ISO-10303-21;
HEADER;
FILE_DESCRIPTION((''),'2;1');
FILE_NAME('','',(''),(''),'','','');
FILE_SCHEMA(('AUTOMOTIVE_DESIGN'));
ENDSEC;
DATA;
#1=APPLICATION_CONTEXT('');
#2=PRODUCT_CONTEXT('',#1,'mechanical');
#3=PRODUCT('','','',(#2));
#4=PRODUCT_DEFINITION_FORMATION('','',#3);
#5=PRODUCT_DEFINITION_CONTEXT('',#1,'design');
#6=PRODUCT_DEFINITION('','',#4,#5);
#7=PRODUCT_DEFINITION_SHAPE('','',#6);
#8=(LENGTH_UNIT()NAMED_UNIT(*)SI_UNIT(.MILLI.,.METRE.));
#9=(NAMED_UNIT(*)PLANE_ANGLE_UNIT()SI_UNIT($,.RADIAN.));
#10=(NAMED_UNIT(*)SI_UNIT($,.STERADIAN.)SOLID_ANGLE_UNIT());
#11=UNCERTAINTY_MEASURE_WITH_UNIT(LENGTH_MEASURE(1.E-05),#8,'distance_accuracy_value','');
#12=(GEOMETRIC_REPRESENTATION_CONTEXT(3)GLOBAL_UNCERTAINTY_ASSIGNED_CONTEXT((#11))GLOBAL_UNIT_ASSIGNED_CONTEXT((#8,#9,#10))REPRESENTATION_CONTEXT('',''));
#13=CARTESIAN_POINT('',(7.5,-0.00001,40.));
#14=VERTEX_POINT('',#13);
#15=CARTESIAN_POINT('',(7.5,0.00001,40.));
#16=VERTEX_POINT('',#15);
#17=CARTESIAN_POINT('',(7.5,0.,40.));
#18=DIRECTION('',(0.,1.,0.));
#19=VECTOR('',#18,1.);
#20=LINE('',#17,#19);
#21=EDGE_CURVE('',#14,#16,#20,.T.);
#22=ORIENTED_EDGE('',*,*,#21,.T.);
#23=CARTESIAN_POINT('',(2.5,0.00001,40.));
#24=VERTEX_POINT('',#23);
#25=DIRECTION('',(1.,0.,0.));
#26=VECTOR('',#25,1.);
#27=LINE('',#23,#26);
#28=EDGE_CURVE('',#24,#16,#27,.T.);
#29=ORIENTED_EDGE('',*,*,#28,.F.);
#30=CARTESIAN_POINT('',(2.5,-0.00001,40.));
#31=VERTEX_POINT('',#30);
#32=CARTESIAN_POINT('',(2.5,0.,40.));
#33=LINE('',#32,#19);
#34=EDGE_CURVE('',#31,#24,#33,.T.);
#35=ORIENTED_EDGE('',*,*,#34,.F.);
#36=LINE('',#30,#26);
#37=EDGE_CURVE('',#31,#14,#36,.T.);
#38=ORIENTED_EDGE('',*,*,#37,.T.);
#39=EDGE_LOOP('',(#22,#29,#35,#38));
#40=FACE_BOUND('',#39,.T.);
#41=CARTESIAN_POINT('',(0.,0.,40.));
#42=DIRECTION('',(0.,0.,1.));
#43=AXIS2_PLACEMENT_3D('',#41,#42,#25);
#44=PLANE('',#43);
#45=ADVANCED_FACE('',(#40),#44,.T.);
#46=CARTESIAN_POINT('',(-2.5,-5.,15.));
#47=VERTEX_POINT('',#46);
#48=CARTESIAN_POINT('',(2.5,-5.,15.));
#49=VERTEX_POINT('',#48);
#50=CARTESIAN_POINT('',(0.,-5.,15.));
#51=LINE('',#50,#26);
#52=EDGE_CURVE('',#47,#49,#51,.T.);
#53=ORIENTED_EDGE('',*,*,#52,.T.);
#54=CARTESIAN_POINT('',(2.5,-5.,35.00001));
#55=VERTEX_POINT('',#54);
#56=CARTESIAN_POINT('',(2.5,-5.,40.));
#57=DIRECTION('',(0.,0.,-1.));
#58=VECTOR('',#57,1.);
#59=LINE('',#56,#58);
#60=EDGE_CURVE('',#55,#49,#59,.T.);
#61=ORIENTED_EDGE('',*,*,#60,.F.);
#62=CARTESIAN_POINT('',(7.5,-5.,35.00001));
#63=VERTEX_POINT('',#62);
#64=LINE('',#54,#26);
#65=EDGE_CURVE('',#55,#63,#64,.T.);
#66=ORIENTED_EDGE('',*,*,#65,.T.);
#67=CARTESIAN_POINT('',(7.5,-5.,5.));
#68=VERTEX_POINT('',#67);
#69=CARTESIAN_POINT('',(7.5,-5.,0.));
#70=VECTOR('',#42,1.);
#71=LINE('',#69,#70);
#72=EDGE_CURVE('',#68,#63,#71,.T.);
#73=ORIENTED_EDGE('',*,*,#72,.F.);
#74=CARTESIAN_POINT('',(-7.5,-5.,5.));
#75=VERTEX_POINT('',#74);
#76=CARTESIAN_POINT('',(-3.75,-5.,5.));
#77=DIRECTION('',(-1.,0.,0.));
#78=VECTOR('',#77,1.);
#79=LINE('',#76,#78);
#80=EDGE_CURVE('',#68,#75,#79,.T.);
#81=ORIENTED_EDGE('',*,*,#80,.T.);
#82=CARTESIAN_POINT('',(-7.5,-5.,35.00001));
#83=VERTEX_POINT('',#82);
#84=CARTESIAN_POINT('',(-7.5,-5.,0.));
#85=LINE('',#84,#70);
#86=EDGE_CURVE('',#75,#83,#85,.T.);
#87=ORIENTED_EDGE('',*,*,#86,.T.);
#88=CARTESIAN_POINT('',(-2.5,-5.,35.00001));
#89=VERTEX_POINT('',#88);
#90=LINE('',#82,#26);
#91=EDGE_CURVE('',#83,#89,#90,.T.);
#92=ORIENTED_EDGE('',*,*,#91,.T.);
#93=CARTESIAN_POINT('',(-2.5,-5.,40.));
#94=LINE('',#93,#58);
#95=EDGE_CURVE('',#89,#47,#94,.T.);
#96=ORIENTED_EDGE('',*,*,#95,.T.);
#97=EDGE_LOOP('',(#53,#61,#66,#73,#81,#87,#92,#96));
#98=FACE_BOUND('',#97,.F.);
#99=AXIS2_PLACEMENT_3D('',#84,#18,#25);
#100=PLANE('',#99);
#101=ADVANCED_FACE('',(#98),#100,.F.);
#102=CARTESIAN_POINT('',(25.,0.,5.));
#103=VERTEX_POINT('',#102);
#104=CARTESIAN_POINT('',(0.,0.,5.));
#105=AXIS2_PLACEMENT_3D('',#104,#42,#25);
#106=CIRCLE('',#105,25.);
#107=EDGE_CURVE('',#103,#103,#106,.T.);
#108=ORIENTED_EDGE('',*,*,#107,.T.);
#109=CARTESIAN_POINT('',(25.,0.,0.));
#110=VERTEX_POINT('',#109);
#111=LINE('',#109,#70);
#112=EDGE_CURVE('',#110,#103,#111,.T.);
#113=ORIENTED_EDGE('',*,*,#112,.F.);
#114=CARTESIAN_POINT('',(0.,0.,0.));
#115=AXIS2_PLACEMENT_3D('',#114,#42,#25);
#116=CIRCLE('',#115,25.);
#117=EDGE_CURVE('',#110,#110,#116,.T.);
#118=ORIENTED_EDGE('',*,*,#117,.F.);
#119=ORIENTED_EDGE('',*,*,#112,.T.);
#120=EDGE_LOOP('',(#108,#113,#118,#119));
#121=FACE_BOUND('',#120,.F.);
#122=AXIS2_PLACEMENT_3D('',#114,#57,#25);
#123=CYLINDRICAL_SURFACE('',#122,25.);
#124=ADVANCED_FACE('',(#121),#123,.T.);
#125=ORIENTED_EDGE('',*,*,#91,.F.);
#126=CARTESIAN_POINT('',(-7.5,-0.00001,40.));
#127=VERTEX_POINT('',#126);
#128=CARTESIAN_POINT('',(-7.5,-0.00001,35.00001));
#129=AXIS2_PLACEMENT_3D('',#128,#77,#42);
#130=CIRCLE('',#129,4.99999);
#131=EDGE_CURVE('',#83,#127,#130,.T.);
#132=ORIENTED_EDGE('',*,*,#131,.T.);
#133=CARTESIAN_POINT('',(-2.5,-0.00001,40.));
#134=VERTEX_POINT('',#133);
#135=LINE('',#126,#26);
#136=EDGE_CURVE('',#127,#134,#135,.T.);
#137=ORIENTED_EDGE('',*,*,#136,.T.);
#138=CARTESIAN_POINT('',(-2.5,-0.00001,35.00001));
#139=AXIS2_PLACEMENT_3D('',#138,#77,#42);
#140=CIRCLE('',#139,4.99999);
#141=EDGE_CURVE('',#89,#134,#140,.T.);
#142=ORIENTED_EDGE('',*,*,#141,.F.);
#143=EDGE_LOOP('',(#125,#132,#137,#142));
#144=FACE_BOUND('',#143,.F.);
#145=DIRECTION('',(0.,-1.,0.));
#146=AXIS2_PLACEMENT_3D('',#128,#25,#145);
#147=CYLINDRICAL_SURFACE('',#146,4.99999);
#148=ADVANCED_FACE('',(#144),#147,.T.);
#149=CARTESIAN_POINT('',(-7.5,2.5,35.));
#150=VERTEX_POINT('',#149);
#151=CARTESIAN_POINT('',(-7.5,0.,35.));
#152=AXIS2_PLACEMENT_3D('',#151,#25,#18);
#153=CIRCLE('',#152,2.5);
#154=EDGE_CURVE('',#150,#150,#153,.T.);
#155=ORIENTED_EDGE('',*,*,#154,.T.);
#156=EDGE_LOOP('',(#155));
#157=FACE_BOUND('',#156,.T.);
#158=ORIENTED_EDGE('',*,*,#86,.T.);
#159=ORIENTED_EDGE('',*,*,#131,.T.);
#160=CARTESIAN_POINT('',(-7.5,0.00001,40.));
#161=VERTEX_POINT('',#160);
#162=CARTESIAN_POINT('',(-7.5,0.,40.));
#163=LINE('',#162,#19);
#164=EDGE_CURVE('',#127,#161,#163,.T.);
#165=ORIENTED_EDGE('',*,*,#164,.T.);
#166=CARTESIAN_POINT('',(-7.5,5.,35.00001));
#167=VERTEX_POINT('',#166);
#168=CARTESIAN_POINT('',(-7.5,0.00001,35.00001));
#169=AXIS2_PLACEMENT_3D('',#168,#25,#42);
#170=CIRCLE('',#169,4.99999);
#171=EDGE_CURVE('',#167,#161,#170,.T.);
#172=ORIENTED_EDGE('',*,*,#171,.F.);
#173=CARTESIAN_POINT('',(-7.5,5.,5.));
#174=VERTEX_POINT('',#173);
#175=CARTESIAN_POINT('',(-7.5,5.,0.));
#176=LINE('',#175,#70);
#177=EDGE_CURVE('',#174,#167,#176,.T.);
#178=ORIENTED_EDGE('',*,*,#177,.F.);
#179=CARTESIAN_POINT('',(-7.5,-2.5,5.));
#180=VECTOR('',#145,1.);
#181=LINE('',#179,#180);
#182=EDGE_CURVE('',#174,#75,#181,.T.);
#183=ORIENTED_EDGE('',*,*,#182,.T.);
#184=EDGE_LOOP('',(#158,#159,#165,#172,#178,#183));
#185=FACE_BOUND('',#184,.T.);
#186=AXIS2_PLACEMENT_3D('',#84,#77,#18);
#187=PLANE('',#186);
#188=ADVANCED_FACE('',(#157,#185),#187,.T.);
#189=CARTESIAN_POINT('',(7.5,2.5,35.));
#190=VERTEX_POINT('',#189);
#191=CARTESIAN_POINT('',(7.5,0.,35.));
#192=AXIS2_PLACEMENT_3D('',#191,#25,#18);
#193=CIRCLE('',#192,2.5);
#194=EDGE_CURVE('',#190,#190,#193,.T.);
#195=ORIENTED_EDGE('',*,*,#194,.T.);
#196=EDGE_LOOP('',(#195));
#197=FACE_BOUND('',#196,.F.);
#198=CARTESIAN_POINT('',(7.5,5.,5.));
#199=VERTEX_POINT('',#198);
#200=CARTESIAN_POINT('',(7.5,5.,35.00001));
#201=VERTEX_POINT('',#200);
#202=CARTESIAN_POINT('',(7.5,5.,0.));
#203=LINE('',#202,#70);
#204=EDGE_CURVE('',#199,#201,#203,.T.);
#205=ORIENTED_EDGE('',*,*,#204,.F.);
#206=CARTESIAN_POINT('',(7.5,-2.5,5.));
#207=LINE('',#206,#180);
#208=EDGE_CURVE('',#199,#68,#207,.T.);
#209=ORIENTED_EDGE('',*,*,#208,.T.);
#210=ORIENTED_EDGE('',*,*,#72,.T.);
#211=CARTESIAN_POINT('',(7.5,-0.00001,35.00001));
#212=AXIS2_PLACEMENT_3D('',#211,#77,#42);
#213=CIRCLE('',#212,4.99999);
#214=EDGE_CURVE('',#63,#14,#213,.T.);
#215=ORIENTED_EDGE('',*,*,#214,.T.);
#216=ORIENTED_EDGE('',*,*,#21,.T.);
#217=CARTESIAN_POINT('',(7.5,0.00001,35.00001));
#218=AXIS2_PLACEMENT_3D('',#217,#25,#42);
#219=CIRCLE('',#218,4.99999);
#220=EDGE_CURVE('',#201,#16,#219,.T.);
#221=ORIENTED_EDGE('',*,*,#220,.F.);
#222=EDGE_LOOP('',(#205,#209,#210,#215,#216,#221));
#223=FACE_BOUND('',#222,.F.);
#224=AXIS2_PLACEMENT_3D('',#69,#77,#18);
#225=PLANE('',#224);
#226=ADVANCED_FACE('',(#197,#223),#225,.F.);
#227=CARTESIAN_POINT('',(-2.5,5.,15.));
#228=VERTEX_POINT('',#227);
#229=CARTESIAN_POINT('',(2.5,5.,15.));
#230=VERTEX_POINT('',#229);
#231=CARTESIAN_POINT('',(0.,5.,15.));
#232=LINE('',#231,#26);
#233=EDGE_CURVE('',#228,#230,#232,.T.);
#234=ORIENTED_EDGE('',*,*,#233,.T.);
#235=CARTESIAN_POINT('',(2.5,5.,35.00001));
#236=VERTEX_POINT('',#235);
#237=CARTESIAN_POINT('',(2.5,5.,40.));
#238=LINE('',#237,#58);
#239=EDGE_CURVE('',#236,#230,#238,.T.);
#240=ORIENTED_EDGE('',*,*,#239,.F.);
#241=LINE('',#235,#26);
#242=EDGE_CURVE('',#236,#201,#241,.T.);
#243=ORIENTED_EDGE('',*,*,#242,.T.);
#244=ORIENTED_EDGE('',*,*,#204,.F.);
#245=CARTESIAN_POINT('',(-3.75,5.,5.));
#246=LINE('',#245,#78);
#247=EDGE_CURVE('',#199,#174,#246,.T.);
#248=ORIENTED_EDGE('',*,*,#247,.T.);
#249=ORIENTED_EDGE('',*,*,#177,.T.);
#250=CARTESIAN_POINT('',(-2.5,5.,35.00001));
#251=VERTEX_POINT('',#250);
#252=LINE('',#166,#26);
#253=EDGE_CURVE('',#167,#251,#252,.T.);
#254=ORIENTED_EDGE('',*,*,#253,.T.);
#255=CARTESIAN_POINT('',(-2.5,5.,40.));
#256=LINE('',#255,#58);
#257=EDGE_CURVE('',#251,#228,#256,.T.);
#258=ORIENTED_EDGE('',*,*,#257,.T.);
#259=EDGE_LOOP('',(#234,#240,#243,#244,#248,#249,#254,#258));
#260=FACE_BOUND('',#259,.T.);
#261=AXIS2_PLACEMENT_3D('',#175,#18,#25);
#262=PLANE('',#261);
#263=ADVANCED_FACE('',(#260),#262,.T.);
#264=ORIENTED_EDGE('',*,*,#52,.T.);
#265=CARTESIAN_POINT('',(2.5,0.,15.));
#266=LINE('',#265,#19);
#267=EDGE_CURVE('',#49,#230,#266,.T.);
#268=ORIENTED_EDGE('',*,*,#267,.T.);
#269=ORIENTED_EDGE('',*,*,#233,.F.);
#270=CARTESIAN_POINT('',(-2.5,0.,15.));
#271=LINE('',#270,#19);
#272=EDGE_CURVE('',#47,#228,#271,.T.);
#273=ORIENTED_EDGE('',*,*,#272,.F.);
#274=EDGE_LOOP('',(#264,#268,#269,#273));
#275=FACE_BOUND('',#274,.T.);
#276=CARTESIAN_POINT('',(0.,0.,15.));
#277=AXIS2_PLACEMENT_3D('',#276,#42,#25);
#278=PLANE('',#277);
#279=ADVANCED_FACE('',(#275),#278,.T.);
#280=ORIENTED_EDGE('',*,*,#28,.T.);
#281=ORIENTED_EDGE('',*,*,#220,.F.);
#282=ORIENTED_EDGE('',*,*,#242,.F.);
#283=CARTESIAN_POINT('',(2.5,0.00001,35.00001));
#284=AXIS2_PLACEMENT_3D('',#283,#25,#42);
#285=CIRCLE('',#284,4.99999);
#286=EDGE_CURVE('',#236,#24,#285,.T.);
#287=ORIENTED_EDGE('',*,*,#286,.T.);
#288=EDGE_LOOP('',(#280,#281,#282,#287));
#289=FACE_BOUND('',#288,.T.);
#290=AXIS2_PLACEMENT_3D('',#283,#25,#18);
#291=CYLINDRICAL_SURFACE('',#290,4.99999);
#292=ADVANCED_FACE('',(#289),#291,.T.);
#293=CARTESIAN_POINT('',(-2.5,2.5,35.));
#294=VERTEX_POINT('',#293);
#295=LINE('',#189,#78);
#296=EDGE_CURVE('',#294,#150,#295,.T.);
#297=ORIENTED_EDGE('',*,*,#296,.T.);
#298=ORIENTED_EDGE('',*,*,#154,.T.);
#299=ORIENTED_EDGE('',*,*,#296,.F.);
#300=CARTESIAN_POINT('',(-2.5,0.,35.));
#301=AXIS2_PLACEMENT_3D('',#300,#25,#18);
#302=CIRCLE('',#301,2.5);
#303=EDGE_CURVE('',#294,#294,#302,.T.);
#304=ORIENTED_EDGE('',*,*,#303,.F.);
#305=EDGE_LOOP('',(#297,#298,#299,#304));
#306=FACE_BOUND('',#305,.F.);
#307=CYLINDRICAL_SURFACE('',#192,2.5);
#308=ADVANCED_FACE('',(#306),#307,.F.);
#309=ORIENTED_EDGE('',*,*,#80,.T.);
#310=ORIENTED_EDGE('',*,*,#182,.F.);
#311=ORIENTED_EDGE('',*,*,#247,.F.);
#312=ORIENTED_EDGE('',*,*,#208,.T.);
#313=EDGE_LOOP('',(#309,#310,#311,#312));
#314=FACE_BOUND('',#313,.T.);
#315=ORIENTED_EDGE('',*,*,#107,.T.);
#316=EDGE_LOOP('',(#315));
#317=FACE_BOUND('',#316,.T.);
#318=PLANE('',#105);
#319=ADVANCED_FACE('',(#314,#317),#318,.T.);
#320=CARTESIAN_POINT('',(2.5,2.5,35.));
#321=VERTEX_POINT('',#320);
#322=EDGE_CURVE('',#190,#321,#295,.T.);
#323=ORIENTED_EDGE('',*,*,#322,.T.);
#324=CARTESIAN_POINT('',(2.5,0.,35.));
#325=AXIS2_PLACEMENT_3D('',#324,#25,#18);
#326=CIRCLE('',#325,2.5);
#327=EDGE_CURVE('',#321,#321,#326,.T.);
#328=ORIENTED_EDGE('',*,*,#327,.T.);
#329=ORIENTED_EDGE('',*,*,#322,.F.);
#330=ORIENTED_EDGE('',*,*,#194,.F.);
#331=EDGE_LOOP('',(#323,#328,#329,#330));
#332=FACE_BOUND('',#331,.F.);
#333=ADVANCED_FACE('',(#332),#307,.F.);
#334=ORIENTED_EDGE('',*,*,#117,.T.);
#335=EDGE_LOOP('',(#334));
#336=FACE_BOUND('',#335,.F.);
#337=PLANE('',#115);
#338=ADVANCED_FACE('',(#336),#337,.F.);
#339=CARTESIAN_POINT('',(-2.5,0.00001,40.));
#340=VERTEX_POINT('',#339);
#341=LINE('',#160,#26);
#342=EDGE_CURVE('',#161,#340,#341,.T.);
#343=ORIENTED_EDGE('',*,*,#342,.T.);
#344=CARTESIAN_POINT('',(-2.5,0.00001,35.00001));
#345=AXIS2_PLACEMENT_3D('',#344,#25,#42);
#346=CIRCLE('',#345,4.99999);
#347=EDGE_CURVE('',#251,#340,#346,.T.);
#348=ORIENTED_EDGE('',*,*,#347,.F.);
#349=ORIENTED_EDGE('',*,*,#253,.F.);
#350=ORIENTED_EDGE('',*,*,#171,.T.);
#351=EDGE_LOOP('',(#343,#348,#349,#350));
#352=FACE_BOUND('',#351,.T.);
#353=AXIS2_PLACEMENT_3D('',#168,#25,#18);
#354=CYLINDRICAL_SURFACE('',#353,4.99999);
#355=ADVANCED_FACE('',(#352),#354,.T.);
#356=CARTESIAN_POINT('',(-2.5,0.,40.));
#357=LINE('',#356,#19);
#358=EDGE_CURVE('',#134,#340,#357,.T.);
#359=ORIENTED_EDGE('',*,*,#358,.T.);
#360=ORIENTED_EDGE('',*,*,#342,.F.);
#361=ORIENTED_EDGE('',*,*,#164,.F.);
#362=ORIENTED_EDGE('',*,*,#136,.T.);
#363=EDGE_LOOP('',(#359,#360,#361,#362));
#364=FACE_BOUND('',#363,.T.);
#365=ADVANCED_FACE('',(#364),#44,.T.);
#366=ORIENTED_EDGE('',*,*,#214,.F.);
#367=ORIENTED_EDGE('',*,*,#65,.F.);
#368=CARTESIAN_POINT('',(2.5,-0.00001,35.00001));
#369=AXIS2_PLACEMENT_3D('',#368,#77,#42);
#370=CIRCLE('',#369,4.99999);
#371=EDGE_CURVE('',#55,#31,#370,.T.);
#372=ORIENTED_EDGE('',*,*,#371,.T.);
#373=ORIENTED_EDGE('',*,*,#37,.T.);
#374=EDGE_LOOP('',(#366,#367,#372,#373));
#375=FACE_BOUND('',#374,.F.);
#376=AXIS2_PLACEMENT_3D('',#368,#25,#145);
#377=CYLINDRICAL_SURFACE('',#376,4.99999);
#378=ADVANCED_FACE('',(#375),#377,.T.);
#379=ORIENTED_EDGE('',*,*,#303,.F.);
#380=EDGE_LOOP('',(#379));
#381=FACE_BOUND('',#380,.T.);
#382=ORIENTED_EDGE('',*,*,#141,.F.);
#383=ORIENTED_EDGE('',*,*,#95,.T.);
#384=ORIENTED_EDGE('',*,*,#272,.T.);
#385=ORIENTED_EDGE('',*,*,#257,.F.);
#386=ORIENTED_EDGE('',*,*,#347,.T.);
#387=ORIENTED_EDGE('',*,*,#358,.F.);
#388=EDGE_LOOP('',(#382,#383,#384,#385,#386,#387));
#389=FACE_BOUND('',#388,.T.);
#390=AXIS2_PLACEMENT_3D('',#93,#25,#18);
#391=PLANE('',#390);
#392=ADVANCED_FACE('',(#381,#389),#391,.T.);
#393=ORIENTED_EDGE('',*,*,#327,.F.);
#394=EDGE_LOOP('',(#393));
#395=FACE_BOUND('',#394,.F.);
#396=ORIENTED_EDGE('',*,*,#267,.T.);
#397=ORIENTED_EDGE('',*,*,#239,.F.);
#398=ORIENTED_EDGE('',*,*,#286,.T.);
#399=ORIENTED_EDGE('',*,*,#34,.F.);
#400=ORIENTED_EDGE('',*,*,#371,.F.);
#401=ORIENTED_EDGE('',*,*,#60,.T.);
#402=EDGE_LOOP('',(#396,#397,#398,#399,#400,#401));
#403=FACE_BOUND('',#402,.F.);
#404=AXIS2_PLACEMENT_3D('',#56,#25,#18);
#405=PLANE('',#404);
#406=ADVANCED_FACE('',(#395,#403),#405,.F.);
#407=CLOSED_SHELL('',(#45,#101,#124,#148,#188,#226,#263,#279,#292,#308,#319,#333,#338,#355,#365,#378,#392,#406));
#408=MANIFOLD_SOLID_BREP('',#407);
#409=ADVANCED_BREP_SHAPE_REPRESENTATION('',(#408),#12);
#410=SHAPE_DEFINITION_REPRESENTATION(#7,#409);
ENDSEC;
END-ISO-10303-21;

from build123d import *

# Parameters (mm, degrees)
F0_R     = 25
F2_DEPTH = 5
F1_W     = 15
F1_H     = 10
F3_DEPTH = 40
F4_W     = 5
F4_H     = 10
F5_DEPTH = 25
F6_R     = 2.5
F7_DEPTH = 32.501
F8_R     = 4.99999


# Not quite as in the source:
# - a fillet or chamfer is up to 0.001 mm smaller than in the source, because OpenCascade refuses the exact size


with BuildPart() as f2:
    # F0 (on Top) → F2 (new body)
    with BuildSketch(Plane.XY):
        Circle(F0_R)
    extrude(amount=F2_DEPTH)

    # F1 (on Top) → F3 (join)
    with BuildSketch(Plane.XY):
        Rectangle(F1_W, F1_H)
    extrude(amount=F3_DEPTH)

    # F4 (on face) → F5 (cut)
    with BuildSketch(Plane.XY.offset(40)):
        Rectangle(F4_W, F4_H)
    extrude(amount=-F5_DEPTH, mode=Mode.SUBTRACT)

    # F6 (on face) → F7 (cut, through all)
    with BuildSketch(Plane.YZ.offset(7.5)):
        with Locations((0, 35)):
            Circle(F6_R)
    extrude(amount=-F7_DEPTH, mode=Mode.SUBTRACT)

    # F8 (radius 5 in the source; OpenCascade refuses exactly that, so slightly less here)
    f8_edges = [f2.edges().sort_by_distance(p)[0] for p in [
        (-5, 5, 40),
        (-5, -5, 40),
        (5, 5, 40),
        (5, -5, 40),
    ]]
    fillet(f8_edges, radius=F8_R)


solid = f2.part
